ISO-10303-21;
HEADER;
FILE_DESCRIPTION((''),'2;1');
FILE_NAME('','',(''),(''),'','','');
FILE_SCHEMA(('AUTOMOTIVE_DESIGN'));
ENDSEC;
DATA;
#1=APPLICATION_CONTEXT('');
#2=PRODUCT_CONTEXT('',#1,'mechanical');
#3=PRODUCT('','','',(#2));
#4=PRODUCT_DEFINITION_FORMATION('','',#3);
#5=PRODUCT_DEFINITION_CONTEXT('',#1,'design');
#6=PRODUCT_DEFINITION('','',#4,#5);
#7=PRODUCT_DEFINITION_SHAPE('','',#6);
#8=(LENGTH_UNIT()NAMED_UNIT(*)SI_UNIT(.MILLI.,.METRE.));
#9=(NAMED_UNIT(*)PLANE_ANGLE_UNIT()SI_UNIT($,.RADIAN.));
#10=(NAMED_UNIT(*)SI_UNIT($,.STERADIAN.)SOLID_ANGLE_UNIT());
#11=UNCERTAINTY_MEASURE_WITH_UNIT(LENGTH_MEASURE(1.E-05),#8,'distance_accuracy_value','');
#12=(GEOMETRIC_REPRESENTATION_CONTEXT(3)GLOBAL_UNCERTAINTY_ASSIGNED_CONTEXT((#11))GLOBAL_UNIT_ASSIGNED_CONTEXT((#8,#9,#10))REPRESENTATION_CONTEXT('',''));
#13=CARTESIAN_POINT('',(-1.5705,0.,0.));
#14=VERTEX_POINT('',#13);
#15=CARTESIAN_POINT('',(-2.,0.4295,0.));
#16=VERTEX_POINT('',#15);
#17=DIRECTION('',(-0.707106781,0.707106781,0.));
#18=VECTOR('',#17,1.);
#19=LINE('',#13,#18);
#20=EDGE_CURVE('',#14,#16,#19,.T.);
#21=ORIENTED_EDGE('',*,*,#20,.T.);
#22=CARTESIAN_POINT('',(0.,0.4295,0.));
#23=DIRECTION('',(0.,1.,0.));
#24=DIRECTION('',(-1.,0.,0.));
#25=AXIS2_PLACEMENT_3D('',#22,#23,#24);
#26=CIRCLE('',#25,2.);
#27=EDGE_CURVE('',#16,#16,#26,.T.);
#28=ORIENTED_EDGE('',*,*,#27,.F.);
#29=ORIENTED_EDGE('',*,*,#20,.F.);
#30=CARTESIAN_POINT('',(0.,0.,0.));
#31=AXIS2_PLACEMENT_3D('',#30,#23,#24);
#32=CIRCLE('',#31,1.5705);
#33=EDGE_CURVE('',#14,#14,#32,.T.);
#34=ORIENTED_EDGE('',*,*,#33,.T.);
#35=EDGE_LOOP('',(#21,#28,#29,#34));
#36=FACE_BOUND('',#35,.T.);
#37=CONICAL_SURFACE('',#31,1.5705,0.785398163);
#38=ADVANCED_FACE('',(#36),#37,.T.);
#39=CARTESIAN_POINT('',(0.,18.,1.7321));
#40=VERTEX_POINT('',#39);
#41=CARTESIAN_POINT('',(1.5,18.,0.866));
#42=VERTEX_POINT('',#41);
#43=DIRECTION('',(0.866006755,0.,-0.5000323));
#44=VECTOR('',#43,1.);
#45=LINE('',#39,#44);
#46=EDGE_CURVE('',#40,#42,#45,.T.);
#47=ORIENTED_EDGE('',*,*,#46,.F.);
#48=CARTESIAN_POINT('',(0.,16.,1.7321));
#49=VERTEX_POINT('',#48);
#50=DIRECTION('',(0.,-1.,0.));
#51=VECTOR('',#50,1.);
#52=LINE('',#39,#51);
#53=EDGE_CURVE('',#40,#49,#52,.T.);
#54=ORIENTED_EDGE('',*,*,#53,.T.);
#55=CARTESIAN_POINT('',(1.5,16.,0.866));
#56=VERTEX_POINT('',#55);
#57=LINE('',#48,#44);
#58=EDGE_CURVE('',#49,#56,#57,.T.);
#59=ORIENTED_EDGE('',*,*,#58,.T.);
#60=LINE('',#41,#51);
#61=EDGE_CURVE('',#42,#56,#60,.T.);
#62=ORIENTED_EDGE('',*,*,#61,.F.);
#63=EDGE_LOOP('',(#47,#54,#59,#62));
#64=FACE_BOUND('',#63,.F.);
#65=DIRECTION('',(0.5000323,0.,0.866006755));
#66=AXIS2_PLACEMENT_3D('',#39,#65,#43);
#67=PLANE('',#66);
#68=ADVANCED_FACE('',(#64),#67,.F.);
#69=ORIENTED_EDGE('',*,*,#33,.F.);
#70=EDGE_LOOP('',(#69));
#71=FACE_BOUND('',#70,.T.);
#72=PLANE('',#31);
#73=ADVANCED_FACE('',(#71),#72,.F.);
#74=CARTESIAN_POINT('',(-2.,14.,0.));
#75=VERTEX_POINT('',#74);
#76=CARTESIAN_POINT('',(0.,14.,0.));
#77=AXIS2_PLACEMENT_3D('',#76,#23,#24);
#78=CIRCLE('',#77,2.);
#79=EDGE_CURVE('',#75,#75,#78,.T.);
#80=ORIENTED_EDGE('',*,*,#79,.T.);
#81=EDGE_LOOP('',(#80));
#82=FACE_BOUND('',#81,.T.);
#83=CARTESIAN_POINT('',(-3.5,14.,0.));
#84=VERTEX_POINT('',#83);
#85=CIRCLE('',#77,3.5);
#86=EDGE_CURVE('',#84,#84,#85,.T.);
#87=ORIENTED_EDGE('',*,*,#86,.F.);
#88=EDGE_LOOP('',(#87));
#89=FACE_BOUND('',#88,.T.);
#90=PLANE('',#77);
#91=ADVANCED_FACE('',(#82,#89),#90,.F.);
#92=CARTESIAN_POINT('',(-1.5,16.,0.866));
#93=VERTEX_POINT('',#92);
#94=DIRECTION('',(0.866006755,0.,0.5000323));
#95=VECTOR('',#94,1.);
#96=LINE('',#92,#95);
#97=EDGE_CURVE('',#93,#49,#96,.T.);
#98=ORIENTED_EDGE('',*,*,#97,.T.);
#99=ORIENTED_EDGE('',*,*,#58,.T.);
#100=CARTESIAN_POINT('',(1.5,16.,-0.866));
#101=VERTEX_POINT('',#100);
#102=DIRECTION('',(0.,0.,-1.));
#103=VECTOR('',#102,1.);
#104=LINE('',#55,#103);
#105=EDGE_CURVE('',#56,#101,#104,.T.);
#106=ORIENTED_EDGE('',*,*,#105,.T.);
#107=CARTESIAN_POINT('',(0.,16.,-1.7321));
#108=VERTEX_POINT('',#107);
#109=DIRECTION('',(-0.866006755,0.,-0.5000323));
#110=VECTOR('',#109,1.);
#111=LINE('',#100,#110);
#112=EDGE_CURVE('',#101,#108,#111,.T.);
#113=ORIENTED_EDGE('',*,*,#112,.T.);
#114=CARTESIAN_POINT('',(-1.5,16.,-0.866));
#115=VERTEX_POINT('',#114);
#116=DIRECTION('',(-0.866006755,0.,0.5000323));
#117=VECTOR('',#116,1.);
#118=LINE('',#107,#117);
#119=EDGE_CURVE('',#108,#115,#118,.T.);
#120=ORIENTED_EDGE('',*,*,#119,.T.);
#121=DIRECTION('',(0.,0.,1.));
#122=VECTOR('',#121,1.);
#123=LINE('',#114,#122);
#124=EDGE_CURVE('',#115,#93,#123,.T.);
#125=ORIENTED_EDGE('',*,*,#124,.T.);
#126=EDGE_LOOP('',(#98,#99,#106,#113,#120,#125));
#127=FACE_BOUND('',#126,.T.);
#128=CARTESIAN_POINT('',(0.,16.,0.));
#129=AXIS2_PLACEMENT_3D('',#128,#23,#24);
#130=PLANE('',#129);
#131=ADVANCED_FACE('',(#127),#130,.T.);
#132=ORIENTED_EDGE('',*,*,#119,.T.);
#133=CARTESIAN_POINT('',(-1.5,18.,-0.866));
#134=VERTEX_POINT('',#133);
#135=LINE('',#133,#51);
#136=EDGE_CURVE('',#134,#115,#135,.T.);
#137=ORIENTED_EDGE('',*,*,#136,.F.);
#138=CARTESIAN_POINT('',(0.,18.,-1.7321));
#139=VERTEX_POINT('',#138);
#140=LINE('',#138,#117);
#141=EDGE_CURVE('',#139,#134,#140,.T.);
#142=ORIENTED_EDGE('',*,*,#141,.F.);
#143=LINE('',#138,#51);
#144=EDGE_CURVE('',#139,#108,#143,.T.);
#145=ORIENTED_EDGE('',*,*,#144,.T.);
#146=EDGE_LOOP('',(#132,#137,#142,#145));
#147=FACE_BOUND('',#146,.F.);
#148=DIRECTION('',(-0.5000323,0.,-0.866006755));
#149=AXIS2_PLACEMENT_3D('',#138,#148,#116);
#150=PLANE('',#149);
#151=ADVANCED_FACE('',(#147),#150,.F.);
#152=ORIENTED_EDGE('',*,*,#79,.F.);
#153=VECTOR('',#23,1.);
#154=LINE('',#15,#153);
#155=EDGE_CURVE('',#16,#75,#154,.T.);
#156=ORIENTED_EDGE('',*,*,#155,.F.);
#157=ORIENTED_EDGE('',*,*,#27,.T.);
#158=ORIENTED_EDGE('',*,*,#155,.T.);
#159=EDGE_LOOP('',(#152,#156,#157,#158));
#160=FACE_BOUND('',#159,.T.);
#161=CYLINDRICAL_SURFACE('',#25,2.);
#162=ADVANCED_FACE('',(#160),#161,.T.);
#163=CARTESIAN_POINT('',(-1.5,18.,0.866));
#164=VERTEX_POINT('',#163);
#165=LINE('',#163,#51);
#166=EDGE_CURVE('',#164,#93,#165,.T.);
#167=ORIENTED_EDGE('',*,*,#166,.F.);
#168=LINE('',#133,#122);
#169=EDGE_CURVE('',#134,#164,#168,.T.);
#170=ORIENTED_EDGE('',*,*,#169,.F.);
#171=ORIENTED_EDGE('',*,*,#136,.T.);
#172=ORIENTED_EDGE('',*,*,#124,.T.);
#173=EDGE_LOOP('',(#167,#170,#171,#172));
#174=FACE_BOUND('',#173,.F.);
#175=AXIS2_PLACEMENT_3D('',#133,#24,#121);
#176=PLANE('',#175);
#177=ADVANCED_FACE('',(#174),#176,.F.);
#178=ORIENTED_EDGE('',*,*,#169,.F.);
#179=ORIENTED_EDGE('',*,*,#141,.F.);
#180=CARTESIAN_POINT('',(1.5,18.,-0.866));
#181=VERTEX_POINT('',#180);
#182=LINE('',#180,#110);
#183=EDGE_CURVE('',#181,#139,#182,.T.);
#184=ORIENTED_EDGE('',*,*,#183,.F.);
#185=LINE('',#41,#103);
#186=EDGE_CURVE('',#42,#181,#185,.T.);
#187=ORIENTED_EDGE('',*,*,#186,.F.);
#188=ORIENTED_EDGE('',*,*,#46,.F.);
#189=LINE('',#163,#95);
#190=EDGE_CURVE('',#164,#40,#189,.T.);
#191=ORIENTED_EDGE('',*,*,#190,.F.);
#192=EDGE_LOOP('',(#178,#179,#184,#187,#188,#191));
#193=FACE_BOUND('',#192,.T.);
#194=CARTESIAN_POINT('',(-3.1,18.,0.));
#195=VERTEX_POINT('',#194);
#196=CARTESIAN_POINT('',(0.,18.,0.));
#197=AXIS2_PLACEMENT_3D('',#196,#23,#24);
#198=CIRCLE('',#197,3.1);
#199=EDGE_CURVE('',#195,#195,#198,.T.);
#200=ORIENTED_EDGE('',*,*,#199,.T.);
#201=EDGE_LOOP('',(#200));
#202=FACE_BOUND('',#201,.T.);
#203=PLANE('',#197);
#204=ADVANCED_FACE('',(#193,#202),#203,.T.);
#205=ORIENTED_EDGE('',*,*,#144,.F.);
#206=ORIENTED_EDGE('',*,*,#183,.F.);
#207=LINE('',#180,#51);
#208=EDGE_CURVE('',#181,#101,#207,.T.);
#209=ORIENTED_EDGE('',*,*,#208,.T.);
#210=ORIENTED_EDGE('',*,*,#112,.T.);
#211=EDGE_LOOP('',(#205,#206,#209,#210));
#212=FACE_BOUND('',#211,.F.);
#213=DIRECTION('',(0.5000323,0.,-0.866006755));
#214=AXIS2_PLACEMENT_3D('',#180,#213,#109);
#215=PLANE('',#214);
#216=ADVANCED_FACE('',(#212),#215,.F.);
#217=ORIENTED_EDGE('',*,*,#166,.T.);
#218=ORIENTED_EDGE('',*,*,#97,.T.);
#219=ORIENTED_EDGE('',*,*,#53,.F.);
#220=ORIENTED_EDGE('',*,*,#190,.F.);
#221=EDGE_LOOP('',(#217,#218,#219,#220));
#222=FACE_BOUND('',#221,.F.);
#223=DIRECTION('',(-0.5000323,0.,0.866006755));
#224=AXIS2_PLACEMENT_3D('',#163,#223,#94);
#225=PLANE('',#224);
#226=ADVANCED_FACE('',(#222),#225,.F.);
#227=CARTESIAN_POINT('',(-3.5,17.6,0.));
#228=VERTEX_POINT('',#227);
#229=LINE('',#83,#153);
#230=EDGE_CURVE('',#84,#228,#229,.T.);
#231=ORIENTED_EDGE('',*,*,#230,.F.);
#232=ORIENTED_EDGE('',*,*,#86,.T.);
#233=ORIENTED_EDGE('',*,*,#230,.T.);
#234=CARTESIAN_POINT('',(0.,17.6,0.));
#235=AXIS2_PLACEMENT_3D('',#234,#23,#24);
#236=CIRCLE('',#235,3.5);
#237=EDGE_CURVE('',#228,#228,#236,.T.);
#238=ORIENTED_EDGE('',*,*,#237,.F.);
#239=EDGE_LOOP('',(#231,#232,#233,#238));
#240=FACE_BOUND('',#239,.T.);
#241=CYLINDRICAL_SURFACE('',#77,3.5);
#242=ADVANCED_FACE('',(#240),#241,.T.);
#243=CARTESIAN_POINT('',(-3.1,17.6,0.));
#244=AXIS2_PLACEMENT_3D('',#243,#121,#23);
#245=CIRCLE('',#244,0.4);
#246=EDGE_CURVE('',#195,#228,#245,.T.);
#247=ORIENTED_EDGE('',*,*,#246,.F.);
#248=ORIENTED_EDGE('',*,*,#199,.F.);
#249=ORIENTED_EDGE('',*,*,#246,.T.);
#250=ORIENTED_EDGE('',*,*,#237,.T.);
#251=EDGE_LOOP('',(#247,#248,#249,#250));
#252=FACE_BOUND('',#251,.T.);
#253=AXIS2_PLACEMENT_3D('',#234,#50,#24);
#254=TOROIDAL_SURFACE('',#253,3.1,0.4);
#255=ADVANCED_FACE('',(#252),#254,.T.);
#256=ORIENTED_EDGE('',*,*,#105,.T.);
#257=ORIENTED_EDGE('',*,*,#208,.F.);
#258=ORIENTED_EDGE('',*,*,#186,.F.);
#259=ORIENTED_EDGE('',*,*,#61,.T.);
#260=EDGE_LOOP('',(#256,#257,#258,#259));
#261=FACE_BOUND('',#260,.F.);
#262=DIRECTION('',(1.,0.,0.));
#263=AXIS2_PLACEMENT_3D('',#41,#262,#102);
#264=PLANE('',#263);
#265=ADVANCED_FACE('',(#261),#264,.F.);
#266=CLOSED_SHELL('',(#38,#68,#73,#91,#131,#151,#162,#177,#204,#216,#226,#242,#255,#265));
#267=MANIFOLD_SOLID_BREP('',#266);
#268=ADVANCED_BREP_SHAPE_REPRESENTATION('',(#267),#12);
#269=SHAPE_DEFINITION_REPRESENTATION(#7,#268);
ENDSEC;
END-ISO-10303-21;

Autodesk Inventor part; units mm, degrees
sketch "Skizze_1" plane through (0, 0, 0) normal (0, 0, 1) x (1, 0, 0)
  line L0 (0, 18) -> (0, 0)
  line L1 (0, 0) -> (-1.5705, 0)
  line L2 (-1.5705, 0) -> (-2, 0.4295)
  line L3 (-2, 0.4295) -> (-2, 14)
  line L4 (-2, 14) -> (-3.5, 14)
  line L5 (-3.5, 14) -> (-3.5, 17.6)
  arc A0 (-3.1, 18) -> (-3.5, 17.6) centre (-3.1, 17.6) ccw
  line L6 (-3.1, 18) -> (0, 18)
  line L7 (0, 18) -> (0, 0)
revolve "Revolution1" add sketch "Skizze_1" angle 360 about axis through (0, 18, 0) along (0, 1, 0)
thread "Thread1" size "M4x0.7" class "6g" standard "ISO Metric profile" length 12.7132
sketch "Skizze_2" plane through (0, 18, 0) normal (0, 1, 0) x (-1, 0, 0)
  line L0 (-1.5, -0.866) -> (0, -1.7321)
  line L1 (0, -1.7321) -> (1.5, -0.866)
  line L2 (1.5, -0.866) -> (1.5, 0.866)
  line L3 (1.5, 0.866) -> (0, 1.7321)
  line L4 (0, 1.7321) -> (-1.5, 0.866)
  line L5 (-1.5, 0.866) -> (-1.5, -0.866)
extrude "Extrusion1" cut sketch "Skizze_2" against normal blind 2
ref_plane "anf_ge_1_XY" through (0, 14, 0) normal (0, 1, 0) x (1, 0, 0)
ref_plane "anf_ge_1_YZ" through (0, 14, 0) normal (1, 0, 0) x (0, 0, -1)
ref_plane "anf_ge_1_ZX" through (0, 14, 0) normal (0, 0, -1) x (0, 1, 0)
properties part number "62311400GA_2" material "Steel AISI 1045 225 ANLD"
